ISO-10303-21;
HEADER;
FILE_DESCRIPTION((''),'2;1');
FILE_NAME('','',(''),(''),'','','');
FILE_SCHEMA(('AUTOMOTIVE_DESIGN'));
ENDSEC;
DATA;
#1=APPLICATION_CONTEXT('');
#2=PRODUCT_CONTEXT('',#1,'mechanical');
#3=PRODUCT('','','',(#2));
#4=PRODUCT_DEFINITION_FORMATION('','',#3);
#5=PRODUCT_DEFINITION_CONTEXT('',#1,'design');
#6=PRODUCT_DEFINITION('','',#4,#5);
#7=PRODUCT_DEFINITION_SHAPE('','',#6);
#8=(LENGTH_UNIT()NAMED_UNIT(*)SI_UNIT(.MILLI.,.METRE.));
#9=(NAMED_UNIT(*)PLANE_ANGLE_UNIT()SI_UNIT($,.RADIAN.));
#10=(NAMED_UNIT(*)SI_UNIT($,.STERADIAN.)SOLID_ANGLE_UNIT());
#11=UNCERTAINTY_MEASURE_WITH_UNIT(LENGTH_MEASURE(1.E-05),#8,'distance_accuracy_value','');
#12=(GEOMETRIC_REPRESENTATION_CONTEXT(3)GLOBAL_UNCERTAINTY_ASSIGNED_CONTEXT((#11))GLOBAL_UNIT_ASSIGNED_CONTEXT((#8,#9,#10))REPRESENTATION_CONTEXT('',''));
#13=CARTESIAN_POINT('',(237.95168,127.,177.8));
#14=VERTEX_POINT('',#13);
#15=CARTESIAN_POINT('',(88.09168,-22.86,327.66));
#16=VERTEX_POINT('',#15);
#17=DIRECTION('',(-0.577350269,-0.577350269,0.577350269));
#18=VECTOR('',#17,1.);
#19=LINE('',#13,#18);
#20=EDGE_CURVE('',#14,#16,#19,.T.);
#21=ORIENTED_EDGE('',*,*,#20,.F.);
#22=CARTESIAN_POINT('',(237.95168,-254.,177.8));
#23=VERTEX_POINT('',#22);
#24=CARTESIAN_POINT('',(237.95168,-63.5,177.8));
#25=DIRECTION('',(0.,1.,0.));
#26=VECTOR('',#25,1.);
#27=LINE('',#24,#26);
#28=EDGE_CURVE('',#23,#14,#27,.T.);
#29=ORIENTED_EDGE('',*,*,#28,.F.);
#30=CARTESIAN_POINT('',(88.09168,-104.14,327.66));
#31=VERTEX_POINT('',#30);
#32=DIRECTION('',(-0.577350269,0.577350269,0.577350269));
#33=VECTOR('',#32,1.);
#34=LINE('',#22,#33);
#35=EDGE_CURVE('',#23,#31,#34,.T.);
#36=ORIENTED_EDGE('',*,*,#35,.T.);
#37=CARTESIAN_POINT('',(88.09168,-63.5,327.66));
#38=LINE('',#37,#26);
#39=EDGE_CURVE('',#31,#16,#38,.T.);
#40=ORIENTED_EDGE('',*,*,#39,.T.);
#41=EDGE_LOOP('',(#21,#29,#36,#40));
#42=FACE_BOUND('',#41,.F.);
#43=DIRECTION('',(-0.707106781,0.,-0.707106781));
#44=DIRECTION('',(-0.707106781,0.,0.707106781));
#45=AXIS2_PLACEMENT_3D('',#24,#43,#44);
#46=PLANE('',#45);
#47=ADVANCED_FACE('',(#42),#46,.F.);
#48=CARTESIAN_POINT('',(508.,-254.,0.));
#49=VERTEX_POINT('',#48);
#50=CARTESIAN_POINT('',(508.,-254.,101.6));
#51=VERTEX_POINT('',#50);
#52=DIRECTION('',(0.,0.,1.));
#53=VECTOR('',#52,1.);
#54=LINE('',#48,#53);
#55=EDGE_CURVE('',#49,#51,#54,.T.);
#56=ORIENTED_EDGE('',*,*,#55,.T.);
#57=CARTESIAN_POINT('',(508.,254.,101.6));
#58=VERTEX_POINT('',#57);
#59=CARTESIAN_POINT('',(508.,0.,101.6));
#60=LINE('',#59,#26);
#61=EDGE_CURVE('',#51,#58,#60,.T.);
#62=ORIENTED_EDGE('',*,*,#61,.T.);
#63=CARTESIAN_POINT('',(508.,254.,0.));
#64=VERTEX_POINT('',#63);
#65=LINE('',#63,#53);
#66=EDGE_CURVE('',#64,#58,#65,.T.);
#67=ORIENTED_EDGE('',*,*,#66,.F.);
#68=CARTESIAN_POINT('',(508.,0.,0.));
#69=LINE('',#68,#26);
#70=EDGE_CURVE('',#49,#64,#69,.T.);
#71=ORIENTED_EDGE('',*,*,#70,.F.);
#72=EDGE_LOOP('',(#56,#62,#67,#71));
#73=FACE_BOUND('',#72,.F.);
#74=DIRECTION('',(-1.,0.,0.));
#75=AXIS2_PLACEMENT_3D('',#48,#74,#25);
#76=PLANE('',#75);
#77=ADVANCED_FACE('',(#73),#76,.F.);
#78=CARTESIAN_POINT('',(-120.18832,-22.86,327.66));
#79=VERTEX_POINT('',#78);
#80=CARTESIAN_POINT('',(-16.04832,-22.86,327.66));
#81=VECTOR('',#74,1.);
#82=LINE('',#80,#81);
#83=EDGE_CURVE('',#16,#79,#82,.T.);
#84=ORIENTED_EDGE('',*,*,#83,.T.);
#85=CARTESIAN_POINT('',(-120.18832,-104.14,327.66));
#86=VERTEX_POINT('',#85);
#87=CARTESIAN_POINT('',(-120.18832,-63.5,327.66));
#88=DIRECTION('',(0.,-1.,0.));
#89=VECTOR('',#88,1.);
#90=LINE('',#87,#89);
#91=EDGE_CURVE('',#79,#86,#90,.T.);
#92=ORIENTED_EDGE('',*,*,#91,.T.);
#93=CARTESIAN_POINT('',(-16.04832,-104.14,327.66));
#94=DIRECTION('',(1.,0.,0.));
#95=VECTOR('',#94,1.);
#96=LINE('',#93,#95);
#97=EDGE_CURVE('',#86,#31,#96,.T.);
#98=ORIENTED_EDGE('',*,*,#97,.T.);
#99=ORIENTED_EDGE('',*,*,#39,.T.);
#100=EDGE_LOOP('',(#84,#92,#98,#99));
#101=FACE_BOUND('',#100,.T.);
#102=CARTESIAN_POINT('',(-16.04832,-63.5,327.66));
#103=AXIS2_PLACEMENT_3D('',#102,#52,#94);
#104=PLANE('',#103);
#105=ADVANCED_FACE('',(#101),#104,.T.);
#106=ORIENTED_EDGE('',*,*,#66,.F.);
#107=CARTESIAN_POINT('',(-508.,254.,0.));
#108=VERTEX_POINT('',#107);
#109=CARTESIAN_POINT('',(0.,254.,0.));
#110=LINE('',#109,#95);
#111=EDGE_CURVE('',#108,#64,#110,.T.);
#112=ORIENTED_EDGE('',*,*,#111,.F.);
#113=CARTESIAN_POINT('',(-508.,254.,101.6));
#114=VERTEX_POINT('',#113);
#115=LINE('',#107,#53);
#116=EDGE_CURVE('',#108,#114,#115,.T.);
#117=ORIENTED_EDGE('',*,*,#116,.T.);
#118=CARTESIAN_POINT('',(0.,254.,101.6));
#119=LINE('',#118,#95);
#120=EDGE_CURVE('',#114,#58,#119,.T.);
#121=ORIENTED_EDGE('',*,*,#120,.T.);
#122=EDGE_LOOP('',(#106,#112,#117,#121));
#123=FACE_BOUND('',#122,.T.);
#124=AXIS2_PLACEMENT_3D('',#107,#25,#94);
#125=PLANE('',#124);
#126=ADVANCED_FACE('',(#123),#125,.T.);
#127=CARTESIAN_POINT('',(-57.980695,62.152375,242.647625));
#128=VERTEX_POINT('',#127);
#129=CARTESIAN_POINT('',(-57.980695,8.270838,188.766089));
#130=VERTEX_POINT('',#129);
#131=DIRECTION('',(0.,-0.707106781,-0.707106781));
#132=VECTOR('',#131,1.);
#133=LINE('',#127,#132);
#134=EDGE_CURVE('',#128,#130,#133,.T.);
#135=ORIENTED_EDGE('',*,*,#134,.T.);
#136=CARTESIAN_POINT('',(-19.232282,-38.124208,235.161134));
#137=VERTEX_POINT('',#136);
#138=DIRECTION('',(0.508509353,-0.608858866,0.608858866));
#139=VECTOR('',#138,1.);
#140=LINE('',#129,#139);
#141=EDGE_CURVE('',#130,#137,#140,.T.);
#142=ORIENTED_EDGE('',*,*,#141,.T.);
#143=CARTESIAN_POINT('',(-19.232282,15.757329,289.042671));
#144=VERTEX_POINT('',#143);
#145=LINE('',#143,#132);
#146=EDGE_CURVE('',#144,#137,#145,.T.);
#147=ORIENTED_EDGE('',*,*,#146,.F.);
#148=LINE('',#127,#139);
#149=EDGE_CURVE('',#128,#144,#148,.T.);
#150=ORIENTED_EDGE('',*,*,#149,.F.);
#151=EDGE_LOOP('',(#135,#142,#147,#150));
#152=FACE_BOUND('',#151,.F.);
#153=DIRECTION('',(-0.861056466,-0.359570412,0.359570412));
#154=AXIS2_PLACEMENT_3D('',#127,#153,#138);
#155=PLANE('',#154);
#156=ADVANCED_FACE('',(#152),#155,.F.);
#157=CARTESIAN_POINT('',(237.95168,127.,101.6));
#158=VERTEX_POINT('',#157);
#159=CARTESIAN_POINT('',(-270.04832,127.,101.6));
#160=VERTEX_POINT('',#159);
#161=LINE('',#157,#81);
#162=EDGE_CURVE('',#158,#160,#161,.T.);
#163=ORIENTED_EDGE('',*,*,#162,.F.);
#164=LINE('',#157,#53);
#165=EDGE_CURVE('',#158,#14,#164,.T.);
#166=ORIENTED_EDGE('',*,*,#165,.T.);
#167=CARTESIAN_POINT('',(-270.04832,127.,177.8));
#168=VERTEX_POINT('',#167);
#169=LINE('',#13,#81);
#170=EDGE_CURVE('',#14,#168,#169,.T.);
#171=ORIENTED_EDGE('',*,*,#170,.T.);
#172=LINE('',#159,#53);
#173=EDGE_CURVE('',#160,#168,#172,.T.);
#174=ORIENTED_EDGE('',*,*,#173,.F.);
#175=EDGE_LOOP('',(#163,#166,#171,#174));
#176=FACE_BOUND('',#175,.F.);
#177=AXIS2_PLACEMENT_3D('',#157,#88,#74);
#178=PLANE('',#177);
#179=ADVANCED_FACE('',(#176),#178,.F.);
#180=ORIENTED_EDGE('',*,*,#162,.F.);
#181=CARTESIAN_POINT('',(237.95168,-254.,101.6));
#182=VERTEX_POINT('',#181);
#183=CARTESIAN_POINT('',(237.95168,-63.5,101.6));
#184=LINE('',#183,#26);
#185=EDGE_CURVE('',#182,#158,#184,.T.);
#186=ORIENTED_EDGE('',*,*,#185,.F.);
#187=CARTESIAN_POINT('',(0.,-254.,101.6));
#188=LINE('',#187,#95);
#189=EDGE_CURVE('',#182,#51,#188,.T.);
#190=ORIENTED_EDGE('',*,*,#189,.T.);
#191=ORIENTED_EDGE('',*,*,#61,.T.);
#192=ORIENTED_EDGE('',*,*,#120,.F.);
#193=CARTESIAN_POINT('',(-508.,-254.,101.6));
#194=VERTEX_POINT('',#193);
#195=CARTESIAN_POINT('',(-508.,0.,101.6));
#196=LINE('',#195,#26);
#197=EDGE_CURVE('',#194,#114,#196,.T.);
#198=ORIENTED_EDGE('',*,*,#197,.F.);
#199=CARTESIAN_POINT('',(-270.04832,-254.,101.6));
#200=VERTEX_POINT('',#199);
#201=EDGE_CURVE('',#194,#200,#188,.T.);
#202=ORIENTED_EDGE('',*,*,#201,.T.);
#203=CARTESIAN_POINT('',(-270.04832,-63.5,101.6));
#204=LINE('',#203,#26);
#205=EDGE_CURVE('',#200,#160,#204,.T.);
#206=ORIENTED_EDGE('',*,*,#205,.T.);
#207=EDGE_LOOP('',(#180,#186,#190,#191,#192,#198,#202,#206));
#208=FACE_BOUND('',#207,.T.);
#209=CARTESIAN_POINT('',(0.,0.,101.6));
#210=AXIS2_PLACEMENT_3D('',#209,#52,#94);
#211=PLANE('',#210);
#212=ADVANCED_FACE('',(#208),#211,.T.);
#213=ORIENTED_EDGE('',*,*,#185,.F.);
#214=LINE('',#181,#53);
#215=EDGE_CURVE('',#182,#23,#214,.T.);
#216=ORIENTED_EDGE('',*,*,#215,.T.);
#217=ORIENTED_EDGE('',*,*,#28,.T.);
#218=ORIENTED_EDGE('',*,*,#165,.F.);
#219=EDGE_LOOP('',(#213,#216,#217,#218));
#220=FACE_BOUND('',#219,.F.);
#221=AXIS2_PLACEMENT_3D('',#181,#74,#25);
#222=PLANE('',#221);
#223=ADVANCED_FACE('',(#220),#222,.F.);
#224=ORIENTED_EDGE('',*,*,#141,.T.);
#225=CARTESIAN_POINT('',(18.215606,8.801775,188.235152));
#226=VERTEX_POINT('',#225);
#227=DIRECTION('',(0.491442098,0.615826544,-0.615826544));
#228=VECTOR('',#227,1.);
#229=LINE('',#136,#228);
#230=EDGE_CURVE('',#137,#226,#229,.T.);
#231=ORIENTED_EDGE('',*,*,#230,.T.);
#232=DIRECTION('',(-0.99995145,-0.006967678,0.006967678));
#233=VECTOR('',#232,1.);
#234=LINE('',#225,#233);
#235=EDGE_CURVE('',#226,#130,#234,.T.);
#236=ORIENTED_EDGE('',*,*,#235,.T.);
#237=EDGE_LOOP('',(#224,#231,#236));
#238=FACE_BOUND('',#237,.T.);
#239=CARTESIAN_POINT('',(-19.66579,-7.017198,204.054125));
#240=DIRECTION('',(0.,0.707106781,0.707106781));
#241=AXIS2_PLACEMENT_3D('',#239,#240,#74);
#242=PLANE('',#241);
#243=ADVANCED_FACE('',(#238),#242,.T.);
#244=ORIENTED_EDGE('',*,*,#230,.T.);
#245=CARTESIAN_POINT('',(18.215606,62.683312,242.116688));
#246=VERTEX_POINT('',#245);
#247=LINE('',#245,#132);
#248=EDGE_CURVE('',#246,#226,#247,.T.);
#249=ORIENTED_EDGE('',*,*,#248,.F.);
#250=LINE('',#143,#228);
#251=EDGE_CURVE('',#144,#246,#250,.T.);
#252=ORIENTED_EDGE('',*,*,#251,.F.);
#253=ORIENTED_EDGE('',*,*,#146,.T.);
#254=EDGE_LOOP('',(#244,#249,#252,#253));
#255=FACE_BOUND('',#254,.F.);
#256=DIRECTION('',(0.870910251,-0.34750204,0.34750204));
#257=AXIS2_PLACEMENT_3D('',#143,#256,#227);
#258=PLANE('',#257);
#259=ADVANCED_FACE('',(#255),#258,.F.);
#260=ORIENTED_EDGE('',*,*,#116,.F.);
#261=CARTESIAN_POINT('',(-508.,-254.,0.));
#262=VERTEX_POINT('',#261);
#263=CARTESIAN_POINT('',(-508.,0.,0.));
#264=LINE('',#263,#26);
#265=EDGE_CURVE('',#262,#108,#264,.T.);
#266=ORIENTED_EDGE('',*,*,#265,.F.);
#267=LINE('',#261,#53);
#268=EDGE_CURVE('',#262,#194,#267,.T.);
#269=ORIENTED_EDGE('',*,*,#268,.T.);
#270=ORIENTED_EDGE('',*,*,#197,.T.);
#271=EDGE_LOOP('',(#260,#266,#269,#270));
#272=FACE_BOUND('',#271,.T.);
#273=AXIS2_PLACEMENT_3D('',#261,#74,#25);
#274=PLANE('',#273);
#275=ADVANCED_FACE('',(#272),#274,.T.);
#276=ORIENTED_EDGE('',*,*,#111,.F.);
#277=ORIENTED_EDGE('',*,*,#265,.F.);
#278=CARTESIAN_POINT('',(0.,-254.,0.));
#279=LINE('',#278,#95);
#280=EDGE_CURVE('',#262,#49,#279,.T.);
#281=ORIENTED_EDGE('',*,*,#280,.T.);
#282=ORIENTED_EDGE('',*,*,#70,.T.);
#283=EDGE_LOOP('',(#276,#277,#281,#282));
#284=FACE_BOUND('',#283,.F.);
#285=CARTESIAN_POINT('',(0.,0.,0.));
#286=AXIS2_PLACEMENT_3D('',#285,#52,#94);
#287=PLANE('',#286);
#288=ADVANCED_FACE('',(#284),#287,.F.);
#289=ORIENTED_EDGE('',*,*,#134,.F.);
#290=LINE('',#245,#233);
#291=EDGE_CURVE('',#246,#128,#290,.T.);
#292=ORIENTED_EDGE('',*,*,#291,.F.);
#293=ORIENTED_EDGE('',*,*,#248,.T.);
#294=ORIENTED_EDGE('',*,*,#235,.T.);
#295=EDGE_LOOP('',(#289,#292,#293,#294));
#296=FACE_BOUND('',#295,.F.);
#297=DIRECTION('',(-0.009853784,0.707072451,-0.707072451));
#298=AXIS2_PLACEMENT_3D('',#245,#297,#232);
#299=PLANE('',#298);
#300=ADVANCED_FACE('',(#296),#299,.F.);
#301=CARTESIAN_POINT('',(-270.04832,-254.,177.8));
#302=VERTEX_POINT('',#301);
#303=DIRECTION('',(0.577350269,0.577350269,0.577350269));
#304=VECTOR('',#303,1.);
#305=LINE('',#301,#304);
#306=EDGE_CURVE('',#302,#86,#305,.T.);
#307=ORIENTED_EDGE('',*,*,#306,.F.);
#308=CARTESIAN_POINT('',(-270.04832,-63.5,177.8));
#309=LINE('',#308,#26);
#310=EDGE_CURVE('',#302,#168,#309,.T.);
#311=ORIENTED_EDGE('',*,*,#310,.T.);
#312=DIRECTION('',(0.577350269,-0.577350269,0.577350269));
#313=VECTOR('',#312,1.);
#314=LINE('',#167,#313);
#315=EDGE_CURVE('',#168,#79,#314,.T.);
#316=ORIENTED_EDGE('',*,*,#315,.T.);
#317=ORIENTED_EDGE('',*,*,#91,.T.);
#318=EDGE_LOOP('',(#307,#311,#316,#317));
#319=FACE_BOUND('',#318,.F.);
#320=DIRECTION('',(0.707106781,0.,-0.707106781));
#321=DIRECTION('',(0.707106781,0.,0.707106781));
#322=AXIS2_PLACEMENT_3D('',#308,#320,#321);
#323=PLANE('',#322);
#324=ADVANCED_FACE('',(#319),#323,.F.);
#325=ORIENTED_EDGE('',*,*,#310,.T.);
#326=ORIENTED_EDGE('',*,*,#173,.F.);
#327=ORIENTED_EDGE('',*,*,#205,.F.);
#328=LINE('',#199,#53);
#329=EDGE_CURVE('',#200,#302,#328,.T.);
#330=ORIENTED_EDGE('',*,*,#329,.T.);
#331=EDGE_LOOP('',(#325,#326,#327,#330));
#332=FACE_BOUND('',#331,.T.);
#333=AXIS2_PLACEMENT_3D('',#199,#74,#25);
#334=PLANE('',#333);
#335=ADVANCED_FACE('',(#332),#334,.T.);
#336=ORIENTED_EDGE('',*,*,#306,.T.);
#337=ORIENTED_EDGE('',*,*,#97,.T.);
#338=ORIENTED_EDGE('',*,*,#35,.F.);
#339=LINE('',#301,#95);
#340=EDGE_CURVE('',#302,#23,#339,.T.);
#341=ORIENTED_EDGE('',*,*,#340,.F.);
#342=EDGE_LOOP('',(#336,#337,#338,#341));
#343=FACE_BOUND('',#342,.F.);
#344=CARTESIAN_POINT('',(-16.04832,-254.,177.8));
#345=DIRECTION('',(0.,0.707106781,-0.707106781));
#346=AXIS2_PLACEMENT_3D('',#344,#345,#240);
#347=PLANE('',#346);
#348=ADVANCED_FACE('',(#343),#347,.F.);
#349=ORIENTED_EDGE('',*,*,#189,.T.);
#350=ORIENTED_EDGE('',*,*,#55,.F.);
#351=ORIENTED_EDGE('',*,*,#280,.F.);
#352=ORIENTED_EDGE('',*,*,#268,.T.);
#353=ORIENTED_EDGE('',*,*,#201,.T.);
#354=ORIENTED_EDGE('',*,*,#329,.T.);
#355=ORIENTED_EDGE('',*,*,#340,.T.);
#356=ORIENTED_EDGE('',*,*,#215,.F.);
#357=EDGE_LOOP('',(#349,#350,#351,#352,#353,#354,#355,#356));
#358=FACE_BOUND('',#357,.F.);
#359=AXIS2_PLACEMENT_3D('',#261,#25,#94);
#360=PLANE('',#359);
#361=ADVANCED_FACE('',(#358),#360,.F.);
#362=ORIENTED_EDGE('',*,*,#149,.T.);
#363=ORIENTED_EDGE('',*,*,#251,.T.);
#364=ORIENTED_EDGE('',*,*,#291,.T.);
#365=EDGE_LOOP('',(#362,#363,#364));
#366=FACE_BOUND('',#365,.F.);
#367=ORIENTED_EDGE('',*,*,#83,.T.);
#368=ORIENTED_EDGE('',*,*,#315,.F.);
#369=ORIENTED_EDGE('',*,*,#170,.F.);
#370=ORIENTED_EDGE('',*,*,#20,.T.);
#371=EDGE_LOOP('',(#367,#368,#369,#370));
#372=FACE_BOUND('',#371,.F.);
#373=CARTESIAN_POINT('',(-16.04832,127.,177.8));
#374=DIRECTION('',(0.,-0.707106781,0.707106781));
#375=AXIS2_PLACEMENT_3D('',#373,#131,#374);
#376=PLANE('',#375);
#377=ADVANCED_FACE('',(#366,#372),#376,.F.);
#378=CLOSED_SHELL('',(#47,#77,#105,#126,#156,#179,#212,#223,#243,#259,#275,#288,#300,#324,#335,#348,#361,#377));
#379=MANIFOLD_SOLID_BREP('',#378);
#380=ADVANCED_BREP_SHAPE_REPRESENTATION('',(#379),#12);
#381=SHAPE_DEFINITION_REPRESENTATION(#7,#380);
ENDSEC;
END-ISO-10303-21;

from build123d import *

# Parameters (mm, degrees)
F0_W      = 1016
F0_H      = 508
F1_DEPTH  = 101.6
F4_W      = 237.9516797066
F4_H      = 381
F4_W_2    = 270.0483202934
F5_DEPTH  = 76.2
F5_FACE_W = 508
F5_FACE_H = 381
F6_DEPTH  = 149.86
F6_TAPER  = 45
F8_DEPTH  = 76.2


# Not quite as in the source:
# - the program builds the solid bodies; features that only make, move or delete a surface that nothing else refers to are left out


with BuildPart() as f1:
    # F0 (on Top) → F1 (new body)
    with BuildSketch(Plane.XY):
        Rectangle(F0_W, F0_H)
    extrude(amount=F1_DEPTH)

    # F4 (on face) → F5 (join)
    with BuildSketch(Plane.XY.offset(101.6)):
        with Locations((118.9758398533, -63.5)):
            Rectangle(F4_W, F4_H)
        with Locations((-135.0241601467, -63.5)):
            Rectangle(F4_W_2, F4_H)
    extrude(amount=F5_DEPTH)

    # F5_face (on face) → F6 (join, symmetric)
    with BuildSketch(Plane(origin=(-16.0483202934, -63.5, 177.8), x_dir=(1, 0, 0), z_dir=(0, 0, 1))):
        Rectangle(F5_FACE_W, F5_FACE_H)
    extrude(amount=F6_DEPTH, both=True, taper=F6_TAPER)

    # F7 (on face) → F8 (cut)
    with BuildSketch(Plane(origin=(0, 152.4, 152.4), x_dir=(-1, 0, 0), z_dir=(0, 0.7071067812, 0.7071067812))):
        Polygon((-18.2156057455, 126.8785575445), (57.9806947666, 127.6294159035), (19.232282097, 193.2419186418), align=None)
    extrude(amount=-F8_DEPTH, mode=Mode.SUBTRACT)


solid = f1.part
